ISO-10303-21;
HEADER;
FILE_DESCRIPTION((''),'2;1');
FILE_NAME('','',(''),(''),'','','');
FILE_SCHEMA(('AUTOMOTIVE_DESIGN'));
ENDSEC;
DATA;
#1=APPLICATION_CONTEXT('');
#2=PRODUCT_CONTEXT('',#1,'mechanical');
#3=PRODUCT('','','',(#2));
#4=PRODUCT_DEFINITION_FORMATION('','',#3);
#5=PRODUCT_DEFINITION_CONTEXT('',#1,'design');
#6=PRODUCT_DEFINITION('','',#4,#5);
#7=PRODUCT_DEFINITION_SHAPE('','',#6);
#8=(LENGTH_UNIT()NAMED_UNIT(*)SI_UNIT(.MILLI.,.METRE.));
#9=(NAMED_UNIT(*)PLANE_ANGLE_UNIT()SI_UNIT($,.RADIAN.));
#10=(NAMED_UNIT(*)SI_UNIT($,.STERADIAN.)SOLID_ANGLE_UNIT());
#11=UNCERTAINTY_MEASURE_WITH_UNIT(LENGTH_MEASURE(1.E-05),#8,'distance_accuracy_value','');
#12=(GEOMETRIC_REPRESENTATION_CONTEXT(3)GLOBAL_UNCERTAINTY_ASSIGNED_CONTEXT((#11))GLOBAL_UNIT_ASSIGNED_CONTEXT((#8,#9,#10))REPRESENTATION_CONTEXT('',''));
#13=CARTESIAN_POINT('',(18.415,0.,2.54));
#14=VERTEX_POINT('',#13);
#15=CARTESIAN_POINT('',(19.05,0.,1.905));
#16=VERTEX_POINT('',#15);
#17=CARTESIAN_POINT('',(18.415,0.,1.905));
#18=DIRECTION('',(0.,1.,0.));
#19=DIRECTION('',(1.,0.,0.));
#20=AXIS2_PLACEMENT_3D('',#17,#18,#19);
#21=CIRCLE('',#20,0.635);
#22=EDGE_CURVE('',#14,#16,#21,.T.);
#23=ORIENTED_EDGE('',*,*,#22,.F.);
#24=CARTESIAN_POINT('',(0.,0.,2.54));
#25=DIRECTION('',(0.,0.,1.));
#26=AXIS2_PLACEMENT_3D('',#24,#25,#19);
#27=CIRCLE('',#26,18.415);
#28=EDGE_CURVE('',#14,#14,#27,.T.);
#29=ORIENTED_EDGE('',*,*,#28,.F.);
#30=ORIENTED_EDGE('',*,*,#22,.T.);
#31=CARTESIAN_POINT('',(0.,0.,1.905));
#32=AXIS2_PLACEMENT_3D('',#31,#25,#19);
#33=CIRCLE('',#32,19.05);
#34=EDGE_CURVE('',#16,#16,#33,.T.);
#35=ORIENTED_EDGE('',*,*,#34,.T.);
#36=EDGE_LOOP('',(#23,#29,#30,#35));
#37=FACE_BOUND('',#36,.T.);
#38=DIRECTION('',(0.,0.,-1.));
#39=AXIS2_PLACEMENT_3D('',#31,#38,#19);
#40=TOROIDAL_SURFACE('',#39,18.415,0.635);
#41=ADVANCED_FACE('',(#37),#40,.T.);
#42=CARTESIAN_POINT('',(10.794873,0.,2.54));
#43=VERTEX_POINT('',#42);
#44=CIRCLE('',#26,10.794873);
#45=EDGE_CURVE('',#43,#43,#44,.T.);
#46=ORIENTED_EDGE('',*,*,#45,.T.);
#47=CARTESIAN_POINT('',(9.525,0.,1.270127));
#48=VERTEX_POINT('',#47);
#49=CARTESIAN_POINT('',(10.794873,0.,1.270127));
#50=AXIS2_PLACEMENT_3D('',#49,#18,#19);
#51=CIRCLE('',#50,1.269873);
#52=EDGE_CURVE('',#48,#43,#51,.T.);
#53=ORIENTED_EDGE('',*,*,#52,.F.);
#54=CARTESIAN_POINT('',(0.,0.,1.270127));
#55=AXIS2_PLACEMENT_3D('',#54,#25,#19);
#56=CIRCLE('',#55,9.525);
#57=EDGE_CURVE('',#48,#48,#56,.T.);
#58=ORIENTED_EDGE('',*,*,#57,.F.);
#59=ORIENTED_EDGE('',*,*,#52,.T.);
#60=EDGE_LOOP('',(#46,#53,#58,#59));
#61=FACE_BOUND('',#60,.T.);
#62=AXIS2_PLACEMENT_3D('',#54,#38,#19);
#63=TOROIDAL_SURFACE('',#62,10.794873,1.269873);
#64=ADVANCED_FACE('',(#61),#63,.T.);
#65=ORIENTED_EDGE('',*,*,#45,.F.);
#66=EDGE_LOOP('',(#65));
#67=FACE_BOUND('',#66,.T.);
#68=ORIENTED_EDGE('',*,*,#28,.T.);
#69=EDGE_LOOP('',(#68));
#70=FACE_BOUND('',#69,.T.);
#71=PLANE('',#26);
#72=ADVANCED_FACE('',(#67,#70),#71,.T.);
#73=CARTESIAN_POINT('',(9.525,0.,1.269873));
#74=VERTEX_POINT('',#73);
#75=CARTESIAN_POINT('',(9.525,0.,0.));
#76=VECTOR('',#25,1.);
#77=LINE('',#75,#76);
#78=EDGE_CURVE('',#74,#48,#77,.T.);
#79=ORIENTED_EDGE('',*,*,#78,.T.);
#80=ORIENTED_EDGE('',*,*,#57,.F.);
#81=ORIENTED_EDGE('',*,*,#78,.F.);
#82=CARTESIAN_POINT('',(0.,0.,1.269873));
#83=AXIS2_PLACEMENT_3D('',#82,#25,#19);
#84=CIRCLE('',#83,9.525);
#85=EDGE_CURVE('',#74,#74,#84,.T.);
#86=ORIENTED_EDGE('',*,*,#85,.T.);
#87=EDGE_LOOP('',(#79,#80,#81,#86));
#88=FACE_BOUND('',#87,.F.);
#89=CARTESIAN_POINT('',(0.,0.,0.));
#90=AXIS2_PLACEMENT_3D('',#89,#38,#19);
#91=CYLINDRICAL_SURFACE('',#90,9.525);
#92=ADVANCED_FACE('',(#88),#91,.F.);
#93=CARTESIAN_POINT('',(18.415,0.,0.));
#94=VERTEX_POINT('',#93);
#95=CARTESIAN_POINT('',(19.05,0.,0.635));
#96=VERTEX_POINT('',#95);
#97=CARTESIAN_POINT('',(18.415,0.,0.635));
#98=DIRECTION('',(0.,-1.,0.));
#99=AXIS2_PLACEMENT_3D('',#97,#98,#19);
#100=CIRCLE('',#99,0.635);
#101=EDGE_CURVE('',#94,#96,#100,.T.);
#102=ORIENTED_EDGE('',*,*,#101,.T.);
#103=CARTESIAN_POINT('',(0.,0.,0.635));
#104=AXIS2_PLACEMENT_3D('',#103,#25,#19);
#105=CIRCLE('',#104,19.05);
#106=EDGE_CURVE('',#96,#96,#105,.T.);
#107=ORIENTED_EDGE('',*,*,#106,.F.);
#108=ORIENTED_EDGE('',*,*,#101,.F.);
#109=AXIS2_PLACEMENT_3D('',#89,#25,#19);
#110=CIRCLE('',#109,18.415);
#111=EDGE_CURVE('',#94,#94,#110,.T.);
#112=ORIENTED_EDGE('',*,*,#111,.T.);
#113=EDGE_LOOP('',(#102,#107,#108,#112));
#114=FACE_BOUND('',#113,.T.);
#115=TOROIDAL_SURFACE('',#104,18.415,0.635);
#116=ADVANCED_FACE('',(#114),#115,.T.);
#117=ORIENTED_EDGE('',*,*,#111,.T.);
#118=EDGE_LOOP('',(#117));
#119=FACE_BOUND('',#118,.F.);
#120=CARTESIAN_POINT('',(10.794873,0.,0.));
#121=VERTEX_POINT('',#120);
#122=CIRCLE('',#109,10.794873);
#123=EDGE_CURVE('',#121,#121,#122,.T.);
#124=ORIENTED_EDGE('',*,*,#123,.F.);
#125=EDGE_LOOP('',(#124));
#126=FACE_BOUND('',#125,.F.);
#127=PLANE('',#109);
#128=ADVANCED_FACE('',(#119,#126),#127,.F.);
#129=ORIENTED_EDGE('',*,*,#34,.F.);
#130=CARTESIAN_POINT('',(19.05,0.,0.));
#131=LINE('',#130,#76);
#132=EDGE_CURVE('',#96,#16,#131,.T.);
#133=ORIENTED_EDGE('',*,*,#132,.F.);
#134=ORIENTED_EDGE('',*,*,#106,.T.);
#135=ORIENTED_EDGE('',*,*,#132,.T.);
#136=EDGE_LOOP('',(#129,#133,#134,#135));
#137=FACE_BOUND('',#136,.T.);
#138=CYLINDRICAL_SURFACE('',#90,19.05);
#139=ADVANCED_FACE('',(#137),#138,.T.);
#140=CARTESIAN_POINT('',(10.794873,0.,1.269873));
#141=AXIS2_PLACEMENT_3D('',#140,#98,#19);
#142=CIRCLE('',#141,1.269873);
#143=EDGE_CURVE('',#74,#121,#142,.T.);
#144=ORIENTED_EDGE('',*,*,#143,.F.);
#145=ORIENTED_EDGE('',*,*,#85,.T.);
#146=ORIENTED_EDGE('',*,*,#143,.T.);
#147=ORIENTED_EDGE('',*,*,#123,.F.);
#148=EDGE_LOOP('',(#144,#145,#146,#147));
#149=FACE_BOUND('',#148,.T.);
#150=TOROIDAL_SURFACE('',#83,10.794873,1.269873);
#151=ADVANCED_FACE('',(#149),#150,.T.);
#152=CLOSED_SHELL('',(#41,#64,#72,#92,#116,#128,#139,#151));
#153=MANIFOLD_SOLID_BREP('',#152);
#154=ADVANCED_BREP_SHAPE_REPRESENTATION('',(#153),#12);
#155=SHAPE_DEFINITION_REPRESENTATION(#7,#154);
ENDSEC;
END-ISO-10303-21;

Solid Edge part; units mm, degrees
sketch "Sketch1" plane through (0, 0, 0) normal (0, 0, 1) x (1, 0, 0)
  circle A0 centre (0, 0) radius 19.05
  circle A1 centre (0, 0) radius 9.525
extrude "Protrusion1" add sketch "Sketch1" along normal blind 2.54
fillet "Round_1" radius 1.27 2 edges at (-9.525, 0, 2.54) (-9.525, 0, 0)
fillet "Round_2" radius 0.635 2 edges at (-19.05, 0, 2.54) (-19.05, 0, 0)
